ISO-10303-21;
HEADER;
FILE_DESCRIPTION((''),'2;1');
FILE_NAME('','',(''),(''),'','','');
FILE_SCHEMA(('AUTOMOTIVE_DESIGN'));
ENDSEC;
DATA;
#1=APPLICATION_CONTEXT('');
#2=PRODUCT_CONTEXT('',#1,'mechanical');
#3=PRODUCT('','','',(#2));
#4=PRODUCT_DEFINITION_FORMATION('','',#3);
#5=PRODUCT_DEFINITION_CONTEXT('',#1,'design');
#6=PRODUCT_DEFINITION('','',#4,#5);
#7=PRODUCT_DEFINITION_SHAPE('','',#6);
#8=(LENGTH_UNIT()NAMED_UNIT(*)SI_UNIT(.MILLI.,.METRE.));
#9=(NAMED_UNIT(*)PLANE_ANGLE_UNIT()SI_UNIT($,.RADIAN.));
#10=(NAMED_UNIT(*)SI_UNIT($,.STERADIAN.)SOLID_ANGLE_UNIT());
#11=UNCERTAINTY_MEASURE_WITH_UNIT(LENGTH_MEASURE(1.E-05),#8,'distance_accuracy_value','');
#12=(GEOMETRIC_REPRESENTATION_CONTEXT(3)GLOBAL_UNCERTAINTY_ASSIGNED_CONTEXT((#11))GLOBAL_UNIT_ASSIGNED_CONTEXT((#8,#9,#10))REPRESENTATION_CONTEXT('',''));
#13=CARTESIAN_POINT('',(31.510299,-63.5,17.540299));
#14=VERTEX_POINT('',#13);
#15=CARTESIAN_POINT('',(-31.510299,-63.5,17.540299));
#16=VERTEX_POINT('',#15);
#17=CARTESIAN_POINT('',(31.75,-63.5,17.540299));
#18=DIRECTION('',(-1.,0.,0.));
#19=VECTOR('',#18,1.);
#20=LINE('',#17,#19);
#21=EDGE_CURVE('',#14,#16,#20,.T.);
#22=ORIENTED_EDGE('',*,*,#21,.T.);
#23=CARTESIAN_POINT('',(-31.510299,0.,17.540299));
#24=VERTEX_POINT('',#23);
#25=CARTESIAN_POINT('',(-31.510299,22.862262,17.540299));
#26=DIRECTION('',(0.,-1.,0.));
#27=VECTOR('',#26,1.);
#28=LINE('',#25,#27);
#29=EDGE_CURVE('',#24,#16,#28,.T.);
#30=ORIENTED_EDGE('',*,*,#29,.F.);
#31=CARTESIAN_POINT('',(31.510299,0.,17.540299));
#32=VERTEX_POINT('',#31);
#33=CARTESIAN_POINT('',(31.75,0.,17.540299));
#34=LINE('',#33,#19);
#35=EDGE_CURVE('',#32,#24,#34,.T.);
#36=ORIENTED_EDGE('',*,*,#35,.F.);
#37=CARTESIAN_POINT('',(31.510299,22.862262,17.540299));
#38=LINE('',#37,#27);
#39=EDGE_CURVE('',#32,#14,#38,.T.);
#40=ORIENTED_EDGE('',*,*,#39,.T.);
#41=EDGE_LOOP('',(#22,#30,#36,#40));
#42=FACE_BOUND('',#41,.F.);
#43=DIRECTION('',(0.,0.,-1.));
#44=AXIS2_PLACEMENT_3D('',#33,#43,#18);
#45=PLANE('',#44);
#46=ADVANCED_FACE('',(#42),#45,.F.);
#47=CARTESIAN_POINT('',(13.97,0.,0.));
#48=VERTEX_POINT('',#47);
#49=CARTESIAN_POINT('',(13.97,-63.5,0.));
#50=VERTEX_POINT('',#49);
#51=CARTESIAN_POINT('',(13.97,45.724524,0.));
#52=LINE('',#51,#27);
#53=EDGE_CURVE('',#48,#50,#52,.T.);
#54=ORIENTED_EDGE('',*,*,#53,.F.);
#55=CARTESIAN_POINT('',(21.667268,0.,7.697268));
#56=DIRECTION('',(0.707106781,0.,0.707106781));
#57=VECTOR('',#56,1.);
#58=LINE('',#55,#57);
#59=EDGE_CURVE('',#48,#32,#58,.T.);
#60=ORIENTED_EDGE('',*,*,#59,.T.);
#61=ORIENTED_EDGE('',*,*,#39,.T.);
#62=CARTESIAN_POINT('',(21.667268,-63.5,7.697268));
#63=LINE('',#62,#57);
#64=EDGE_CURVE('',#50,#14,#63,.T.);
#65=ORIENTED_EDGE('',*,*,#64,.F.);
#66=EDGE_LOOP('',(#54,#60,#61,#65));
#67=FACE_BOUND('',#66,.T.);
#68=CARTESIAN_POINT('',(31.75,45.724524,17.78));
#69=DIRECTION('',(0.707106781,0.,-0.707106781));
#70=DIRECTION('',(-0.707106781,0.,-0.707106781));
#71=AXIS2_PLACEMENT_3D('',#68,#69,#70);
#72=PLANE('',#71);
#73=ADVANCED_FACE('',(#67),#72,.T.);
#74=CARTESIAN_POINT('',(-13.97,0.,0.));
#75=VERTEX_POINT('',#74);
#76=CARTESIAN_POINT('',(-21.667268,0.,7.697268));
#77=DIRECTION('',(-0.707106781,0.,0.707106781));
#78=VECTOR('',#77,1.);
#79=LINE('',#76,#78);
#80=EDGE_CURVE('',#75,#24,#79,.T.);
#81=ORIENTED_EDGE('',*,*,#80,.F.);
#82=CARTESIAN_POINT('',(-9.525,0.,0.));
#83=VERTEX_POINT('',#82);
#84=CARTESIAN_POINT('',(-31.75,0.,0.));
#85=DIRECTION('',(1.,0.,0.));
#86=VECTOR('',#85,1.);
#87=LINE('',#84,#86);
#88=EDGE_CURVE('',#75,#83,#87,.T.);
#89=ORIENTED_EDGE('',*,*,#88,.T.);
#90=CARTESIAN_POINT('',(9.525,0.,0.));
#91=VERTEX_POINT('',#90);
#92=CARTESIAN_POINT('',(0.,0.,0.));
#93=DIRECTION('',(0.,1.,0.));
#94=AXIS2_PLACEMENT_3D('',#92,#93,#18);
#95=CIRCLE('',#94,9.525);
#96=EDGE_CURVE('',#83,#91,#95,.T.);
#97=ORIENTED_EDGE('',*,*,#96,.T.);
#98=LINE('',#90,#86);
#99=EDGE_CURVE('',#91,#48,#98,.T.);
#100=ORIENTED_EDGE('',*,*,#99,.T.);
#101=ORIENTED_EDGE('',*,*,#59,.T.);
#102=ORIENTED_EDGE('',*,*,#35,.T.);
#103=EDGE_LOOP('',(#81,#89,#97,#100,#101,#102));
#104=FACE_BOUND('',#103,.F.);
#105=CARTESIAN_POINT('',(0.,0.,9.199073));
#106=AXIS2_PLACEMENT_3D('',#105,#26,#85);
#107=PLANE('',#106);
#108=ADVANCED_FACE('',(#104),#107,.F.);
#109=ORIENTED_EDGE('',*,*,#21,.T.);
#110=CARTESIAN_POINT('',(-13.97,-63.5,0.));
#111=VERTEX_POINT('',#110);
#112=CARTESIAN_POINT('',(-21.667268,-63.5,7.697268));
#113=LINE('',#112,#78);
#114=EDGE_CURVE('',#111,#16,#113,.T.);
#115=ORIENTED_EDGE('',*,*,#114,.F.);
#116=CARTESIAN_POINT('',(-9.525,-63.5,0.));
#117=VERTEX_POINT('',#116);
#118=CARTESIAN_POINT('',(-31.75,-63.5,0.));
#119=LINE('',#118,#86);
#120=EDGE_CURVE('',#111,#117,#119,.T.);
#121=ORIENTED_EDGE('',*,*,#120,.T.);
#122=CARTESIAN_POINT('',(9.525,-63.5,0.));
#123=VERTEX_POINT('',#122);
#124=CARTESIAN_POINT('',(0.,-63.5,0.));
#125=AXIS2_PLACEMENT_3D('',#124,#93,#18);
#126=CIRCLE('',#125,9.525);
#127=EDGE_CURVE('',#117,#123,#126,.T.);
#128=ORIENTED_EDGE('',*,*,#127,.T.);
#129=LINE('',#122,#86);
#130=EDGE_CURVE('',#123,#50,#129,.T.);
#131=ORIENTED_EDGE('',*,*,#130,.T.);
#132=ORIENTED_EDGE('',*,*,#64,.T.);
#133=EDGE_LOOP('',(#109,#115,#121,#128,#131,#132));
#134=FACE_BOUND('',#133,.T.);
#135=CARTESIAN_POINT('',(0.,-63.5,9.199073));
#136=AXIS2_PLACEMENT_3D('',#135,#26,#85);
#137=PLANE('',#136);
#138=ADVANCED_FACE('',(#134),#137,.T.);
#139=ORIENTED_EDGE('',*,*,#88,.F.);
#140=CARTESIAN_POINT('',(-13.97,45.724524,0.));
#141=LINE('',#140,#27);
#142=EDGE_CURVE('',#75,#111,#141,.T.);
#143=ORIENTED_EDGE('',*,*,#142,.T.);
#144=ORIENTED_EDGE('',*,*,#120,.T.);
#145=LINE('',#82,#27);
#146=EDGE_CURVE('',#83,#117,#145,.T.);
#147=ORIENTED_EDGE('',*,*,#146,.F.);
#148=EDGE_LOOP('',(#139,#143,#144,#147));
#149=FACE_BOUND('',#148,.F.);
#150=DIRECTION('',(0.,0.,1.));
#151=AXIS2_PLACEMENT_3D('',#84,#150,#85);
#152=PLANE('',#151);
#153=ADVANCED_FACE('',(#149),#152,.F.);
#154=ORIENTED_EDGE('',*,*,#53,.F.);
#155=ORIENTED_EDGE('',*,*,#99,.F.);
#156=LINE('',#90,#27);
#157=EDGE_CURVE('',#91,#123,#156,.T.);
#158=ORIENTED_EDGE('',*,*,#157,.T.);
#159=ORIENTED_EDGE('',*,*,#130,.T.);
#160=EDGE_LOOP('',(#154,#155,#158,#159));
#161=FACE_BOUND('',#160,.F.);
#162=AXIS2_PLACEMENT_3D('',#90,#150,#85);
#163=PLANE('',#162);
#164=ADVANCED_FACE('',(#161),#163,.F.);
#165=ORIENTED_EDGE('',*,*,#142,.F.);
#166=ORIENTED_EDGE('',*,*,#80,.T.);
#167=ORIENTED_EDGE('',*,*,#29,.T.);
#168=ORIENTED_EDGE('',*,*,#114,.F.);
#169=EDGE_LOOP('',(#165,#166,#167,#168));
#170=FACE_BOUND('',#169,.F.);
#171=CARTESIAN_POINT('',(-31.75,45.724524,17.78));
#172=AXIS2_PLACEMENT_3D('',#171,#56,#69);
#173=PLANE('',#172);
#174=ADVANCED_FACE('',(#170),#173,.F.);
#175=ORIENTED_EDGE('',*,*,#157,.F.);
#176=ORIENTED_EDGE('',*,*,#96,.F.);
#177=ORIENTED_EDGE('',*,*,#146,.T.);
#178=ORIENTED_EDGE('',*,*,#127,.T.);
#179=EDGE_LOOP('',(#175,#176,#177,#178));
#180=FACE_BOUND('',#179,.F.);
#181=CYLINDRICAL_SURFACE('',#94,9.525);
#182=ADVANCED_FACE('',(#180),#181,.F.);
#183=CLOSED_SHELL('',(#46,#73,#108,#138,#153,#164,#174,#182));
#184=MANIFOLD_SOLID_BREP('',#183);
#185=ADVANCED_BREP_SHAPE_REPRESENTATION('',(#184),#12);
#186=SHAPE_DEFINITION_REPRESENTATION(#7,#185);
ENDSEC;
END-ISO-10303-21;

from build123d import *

# Parameters (mm, degrees)
F2_DEPTH    = 63.5
F3_T1_DEPTH = 154.9490470521


# Not quite as in the source:
# - a fillet or chamfer that OpenCascade refuses, or shapes differently, is made with other operations: its cross-section is extruded or revolved along the edge and cut away or added


with BuildPart() as f2:
    # F1 (on face) → F2 (new body)
    with BuildSketch(Plane.XZ):
        with BuildLine():
            ThreePointArc((-9.525, 0), (0, 9.525), (9.525, 0))
            Line((9.525, 0), (17.9719245062, 0))
            Line((17.9719245062, 0), (31.75, 0))
            Line((31.75, 0), (31.75, 17.5402989774))
            Line((31.75, 17.5402989774), (-31.75, 17.5402989774))
            Line((-31.75, 17.5402989774), (-31.75, 0))
            Line((-31.75, 0), (-17.9475410922, 0))
            Line((-17.9475410922, 0), (-9.525, 0))
        make_face()
    extrude(amount=F2_DEPTH)

    # F3: chamfer of 17.78 on 2 edges, made by hand

    # F3_s2 → F3_t1 (cut)
    with BuildSketch(Plane.XZ.offset(-45.724523526)):
        Polygon((-31.75, 17.78), (-13.97, 0), (-31.75, 0), align=None)
        Polygon((31.75, 17.78), (13.97, 0), (31.75, 0), align=None)
    extrude(amount=F3_T1_DEPTH, mode=Mode.SUBTRACT)


solid = f2.part
